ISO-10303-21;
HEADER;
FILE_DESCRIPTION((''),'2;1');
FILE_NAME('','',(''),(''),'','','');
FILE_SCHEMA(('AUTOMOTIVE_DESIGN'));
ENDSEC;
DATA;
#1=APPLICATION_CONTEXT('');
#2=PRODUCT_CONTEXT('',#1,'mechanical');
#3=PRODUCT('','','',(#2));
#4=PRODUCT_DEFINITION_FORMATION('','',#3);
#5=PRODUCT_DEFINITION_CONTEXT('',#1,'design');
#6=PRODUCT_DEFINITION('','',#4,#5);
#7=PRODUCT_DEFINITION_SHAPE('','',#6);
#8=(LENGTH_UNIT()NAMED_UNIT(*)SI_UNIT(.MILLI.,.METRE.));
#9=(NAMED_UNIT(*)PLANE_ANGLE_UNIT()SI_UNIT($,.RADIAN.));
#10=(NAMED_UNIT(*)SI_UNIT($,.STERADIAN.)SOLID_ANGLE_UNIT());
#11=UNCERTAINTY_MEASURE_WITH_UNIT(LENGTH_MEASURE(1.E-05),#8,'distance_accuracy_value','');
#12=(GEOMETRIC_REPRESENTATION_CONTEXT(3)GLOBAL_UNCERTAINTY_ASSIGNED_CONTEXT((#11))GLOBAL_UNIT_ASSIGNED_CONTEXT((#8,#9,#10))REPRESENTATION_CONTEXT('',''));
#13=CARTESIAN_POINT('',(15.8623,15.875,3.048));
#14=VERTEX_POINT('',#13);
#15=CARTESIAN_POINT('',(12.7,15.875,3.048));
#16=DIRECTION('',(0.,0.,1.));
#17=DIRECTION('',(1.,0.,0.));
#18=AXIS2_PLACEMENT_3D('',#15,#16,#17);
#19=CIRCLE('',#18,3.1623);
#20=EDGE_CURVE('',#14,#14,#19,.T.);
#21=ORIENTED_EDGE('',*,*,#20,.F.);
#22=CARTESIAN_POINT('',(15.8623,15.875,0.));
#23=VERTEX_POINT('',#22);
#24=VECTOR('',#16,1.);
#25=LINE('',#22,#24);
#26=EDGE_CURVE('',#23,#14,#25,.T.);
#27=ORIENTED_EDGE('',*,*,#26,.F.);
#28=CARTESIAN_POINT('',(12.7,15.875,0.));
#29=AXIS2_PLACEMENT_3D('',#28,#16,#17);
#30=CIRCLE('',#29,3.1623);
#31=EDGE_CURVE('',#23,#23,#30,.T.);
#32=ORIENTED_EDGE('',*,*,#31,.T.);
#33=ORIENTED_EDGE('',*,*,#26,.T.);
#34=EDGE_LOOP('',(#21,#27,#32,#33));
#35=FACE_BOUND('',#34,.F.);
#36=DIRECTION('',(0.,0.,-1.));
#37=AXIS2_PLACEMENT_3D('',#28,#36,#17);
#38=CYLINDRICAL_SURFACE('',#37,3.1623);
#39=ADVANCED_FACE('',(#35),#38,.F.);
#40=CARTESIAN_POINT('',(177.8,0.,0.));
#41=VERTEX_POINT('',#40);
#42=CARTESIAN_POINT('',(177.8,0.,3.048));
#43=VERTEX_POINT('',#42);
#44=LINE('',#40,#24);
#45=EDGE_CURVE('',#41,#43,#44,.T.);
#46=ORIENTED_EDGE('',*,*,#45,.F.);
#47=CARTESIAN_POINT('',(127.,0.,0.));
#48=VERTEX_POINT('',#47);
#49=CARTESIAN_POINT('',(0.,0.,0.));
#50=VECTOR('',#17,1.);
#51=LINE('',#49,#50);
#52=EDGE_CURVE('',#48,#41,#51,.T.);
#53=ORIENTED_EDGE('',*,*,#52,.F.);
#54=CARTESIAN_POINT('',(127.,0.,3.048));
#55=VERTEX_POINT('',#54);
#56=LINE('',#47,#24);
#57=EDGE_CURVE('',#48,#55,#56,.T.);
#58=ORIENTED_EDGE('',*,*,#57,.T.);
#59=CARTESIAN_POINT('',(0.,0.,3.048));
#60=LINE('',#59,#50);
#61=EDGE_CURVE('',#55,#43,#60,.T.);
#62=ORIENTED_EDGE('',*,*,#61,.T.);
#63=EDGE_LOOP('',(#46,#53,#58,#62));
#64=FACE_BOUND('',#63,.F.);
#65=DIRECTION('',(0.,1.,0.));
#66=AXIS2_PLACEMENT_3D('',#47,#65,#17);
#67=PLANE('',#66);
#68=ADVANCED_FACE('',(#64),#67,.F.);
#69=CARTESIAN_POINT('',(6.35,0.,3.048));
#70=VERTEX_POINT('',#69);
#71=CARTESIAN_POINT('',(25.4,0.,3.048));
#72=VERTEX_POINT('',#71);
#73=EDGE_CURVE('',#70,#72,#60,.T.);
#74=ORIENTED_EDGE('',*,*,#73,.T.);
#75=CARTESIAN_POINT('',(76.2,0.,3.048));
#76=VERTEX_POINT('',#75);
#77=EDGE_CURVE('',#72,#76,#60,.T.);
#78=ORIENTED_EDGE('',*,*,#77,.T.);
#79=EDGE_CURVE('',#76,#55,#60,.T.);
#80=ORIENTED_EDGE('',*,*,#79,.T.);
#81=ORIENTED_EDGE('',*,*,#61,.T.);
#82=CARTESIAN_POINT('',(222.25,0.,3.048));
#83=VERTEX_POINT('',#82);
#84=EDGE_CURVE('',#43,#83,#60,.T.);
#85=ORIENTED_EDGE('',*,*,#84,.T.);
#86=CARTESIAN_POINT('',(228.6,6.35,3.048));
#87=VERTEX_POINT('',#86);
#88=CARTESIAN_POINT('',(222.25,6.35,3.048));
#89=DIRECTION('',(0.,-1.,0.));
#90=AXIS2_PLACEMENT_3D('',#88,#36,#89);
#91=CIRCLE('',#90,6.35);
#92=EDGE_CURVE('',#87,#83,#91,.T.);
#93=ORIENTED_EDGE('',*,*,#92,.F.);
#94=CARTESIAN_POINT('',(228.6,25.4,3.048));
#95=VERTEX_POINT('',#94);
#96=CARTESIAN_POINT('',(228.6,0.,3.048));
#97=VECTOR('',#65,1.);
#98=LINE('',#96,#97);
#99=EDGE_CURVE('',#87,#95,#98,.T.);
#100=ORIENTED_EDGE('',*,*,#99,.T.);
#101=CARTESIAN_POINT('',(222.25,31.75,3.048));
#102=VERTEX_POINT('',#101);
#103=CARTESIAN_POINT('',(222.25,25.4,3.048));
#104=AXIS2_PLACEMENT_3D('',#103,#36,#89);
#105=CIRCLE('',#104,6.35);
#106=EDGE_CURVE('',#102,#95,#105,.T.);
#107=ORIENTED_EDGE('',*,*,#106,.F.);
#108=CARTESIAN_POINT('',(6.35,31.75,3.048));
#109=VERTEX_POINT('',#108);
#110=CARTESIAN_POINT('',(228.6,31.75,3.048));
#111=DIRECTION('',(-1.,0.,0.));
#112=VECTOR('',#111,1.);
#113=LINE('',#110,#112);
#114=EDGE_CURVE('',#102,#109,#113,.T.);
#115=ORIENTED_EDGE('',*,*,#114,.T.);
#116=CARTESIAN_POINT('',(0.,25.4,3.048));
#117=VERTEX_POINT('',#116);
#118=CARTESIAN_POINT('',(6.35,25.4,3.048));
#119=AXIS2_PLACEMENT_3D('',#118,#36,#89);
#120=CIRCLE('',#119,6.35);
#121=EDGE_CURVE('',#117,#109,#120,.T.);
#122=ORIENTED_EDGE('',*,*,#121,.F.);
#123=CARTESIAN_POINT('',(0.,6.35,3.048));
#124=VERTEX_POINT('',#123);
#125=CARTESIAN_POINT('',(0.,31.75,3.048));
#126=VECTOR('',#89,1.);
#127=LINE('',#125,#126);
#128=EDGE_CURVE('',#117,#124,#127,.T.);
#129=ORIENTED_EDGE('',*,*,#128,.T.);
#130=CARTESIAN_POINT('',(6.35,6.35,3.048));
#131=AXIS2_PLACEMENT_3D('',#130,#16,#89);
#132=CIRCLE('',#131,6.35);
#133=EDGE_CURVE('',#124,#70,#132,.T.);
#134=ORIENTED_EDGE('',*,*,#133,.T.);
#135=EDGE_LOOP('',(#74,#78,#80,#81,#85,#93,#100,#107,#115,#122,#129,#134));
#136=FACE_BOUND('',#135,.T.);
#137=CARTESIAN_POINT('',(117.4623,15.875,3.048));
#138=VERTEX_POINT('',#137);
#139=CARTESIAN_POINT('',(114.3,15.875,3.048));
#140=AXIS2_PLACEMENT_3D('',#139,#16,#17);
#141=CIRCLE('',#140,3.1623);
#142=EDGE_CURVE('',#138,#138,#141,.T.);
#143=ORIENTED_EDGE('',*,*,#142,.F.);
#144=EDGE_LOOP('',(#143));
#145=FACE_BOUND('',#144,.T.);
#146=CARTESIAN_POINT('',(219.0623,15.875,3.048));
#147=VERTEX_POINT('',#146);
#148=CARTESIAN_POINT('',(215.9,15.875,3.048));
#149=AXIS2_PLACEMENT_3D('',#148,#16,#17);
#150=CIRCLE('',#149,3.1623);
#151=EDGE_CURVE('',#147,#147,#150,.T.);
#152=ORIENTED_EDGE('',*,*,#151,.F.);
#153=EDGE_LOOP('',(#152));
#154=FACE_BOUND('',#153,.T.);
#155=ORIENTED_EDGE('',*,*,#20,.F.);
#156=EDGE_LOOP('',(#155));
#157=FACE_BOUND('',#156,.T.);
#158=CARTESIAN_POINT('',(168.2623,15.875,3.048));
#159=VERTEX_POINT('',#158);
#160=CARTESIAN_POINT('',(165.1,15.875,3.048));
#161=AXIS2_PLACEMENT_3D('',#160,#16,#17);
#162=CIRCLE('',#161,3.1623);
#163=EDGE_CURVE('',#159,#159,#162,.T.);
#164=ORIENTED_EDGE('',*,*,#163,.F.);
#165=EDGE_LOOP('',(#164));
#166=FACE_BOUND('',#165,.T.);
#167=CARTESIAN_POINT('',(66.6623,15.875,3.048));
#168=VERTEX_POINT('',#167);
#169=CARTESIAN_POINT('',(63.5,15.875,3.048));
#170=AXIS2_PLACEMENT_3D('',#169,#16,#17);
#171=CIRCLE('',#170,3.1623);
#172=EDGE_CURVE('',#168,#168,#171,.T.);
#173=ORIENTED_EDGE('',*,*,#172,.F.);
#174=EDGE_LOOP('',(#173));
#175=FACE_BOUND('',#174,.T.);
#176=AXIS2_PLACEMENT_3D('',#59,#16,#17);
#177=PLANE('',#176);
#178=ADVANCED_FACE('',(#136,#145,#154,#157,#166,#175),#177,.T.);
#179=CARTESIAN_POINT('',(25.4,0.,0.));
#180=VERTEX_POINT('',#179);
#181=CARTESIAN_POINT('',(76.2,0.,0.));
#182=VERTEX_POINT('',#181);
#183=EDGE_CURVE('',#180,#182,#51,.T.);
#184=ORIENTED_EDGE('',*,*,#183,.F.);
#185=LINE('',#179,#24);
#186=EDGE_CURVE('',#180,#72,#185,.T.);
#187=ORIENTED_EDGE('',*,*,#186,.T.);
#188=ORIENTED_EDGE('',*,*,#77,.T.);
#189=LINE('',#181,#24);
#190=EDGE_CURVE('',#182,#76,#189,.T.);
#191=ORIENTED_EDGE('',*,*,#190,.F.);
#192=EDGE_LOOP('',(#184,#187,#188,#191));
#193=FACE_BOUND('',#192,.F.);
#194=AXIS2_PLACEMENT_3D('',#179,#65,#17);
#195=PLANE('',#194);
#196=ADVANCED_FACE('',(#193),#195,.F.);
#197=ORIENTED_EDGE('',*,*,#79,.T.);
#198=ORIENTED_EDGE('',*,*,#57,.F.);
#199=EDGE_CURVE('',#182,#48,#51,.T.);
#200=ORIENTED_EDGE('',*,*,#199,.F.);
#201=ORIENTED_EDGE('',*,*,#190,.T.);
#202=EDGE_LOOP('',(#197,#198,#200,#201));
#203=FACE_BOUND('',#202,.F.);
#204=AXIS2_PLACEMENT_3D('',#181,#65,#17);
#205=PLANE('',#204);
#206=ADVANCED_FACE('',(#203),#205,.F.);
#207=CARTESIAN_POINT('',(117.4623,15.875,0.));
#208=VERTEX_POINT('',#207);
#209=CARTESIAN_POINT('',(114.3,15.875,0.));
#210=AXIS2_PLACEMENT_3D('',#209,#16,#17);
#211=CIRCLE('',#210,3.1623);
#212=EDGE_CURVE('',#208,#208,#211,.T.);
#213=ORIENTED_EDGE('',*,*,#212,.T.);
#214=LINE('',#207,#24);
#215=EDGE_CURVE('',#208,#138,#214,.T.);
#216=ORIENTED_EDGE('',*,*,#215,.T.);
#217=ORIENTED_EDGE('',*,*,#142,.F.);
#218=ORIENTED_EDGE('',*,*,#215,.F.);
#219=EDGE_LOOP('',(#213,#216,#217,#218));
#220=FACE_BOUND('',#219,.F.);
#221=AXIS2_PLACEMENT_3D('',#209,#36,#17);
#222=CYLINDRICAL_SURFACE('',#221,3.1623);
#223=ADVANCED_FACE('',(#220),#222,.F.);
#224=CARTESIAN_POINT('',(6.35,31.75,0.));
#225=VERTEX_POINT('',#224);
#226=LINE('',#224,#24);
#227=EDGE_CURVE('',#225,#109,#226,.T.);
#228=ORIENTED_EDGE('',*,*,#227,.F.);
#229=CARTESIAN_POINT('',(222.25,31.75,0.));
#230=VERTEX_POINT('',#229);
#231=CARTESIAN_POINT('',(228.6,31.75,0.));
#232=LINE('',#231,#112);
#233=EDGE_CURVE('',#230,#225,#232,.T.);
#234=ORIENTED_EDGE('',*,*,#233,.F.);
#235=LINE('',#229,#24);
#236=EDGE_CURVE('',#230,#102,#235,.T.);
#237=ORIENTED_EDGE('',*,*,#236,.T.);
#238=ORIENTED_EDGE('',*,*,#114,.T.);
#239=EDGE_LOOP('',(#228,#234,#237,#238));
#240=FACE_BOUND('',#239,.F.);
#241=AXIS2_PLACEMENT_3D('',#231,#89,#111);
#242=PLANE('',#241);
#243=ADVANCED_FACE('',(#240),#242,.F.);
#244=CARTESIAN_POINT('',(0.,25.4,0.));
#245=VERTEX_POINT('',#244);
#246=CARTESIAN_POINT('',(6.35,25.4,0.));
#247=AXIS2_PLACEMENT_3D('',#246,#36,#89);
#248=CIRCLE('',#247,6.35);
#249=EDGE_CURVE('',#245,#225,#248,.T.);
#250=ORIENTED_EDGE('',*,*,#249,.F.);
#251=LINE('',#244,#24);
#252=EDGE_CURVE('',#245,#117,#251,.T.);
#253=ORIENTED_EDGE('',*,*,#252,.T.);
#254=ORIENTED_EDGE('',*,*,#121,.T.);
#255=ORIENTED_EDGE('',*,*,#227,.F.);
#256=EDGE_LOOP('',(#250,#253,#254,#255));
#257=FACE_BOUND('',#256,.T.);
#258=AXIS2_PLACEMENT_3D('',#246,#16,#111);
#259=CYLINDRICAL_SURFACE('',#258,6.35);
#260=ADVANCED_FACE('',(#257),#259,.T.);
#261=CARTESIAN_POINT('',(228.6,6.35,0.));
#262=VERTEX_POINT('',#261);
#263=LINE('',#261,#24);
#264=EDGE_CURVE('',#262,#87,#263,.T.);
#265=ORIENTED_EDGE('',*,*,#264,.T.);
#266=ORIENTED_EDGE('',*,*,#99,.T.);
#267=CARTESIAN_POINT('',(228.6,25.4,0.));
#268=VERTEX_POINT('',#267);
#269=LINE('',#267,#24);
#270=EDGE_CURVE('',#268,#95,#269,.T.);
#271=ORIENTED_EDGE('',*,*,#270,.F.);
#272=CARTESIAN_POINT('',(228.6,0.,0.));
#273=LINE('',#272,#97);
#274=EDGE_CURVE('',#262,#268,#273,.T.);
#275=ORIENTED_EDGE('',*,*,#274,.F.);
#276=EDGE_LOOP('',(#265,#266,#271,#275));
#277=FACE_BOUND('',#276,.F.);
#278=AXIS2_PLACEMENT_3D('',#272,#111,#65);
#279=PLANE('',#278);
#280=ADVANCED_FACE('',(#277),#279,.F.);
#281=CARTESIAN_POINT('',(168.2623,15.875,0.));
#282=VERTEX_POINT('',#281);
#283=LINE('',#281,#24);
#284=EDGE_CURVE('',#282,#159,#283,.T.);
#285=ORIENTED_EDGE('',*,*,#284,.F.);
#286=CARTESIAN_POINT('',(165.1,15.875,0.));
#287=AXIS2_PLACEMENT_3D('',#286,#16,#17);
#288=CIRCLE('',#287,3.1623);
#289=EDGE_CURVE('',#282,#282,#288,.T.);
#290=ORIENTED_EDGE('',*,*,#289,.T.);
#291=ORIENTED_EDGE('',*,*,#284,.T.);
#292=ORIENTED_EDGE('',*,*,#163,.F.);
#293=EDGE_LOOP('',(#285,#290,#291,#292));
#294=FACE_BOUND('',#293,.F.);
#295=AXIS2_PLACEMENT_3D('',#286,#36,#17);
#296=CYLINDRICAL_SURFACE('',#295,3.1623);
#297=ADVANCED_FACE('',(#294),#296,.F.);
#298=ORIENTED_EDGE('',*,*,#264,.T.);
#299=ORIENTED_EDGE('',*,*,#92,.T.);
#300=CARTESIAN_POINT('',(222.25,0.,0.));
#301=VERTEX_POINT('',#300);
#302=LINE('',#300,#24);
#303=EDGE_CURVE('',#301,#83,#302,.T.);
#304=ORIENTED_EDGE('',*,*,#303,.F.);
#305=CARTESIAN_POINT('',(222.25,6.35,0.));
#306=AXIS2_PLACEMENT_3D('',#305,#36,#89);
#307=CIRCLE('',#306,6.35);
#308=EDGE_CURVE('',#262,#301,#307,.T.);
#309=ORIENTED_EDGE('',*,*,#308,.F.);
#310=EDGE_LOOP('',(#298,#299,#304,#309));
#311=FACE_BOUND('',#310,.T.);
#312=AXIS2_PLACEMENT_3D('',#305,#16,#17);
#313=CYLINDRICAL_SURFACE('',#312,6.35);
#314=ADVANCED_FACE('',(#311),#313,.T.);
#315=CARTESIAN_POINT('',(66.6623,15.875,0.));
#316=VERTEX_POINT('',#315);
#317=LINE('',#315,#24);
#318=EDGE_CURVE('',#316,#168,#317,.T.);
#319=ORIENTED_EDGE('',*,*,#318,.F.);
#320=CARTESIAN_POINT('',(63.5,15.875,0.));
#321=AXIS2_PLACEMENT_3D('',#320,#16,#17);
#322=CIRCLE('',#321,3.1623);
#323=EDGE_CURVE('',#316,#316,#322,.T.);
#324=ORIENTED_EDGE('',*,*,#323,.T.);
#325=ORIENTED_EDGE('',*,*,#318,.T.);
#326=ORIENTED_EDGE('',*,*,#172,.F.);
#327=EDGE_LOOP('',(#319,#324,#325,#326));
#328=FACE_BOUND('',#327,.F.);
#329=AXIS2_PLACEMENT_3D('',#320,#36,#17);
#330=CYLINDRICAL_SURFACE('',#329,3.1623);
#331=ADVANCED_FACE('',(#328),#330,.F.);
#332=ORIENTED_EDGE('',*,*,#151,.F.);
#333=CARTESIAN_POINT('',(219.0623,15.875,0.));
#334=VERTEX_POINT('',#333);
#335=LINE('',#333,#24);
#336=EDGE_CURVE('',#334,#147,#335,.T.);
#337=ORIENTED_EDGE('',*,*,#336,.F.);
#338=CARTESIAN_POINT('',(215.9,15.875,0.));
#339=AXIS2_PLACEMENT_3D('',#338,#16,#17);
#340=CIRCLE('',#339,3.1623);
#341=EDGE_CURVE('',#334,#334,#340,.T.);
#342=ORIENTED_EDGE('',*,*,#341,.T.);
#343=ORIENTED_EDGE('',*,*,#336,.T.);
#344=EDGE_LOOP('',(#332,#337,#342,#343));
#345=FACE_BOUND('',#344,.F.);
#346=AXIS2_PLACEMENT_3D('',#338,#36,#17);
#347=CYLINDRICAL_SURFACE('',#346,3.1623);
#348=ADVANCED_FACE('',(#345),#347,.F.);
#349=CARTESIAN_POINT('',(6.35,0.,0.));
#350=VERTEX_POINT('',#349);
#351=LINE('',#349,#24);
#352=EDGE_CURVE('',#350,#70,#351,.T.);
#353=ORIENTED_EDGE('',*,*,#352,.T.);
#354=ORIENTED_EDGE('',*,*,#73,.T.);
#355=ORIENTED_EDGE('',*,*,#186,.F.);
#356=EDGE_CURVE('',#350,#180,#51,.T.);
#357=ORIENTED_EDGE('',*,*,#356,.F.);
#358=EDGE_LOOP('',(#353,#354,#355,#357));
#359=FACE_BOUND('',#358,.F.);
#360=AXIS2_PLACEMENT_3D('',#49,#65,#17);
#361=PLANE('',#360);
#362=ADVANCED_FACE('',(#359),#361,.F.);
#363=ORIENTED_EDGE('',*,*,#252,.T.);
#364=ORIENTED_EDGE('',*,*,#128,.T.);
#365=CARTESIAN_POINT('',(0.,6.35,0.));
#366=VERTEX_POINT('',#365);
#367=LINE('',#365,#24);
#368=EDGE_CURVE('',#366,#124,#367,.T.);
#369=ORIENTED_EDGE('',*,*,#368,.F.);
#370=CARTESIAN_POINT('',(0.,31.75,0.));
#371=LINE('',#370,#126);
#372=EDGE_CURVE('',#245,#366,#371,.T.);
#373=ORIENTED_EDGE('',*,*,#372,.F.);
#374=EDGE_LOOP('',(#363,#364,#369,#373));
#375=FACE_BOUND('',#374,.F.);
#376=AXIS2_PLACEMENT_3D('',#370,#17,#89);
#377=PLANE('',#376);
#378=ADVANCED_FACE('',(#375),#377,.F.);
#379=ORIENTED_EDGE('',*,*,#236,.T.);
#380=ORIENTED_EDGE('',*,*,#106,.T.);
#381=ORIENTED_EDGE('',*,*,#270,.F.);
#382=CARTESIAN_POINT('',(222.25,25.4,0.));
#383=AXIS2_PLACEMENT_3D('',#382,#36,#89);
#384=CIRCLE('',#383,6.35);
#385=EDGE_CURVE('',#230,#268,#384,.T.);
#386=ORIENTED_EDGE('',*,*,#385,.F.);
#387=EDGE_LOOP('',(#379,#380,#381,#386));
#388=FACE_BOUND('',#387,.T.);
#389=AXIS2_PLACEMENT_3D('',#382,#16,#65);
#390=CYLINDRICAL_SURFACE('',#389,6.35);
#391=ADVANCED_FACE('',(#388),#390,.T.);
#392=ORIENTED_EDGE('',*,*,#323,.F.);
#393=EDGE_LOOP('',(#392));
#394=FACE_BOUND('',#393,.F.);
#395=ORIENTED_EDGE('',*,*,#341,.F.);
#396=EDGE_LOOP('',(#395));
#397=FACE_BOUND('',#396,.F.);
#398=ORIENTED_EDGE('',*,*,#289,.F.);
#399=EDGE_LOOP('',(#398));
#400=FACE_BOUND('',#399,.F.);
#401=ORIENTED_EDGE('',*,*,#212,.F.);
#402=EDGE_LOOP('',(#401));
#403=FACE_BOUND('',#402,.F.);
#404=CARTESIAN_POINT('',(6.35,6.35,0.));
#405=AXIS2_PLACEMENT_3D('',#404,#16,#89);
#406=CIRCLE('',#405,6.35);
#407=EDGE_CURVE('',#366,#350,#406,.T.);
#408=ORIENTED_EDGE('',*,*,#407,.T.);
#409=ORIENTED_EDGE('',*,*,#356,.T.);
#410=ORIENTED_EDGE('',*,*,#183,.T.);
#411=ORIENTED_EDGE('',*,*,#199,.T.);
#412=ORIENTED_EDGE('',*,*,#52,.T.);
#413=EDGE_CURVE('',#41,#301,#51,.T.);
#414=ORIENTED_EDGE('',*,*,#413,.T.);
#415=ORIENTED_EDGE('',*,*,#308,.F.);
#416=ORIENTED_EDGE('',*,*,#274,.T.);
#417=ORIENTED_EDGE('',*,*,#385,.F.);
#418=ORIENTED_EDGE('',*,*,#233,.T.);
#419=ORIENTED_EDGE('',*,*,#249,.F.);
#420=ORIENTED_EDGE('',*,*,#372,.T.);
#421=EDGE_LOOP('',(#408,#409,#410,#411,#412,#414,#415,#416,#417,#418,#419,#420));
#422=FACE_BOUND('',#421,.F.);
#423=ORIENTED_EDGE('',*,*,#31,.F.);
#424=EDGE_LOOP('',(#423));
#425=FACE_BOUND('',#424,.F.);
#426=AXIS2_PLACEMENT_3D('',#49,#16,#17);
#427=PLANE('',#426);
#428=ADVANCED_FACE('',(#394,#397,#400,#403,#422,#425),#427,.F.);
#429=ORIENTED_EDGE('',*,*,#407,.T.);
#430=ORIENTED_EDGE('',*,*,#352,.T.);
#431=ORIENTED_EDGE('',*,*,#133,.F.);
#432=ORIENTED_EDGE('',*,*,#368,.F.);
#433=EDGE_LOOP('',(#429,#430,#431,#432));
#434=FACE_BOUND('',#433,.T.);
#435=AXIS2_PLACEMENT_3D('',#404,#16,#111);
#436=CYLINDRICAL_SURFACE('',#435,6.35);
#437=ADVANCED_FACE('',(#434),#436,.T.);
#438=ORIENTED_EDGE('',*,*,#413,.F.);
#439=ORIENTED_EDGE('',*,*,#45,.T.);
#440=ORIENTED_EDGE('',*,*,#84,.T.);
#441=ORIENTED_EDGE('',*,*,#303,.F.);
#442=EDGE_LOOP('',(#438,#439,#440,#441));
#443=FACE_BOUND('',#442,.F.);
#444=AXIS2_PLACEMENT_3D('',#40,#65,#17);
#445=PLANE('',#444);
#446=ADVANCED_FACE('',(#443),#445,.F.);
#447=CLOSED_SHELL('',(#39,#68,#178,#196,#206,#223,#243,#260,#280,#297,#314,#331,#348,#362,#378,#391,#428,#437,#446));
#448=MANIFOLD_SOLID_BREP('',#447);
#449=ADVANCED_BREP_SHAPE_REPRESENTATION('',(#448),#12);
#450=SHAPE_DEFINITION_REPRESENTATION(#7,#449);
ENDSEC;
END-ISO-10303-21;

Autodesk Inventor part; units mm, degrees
ref_plane "YZ Plane" through (0, 0, 0) normal (1, 0, 0) x (0, 1, 0)
ref_plane "XZ Plane" through (0, 0, 0) normal (0, 1, 0) x (-1, 0, 0)
ref_plane "XY Plane" through (0, 0, 0) normal (0, 0, 1) x (1, 0, 0)
sketch "Sketch1" plane through (0, 0, 0) normal (0, 0, 1) x (1, 0, 0)
  line L0 (0, 0) -> (228.6, 0)
  line L1 (228.6, 0) -> (228.6, 31.75)
  line L2 (228.6, 31.75) -> (0, 31.75)
  line L3 (0, 31.75) -> (0, 0)
  circle A0 centre (215.9, 15.875) radius 3.1623
  line L4 (-50.8, 0) -> (177.8, 0)
  circle A1 centre (165.1, 15.875) radius 3.1623
  line L5 (-101.6, 0) -> (127, 0)
  circle A2 centre (114.3, 15.875) radius 3.1623
  line L6 (-152.4, 0) -> (76.2, 0)
  circle A3 centre (63.5, 15.875) radius 3.1623
  line L7 (-203.2, 0) -> (25.4, 0)
  circle A4 centre (12.7, 15.875) radius 3.1623
  dimension "d0" = 228.6
  dimension "d1" = 31.75
  dimension "d2" = 6.3246
  dimension "d3" = 12.7
  dimension "d4" = 15.875
  dimension "d7" = 50.8
extrude "Plate1" add sketch "Sketch1" along normal blind 3.048
fillet "Corner Round1" radius 6.35 4 edges at (228.6, 31.75, 1.524) (228.6, 0, 1.524) (0, 31.75, 1.524) (0, 0, 1.524)
equation "\"BendRadius\" = Thickness"
equation "\"BendReliefWidth\" = Thickness"
equation "\"BendReliefDepth\" = 0.5 * Thickness"
equation "\"CornerReliefSize\" = 4 * Thickness"
equation "\"MinimumRemnant\" = 2 * Thickness"
equation "\"TransitionRadius\" = BendRadius"
equation "\"JacobiRadiusSize\" = BendRadius"
equation "\"GapSize\" = Thickness"
equation "\"d12\" = BendRadius"
equation "\"Thickness\" = 3.048"
properties part number "super3"
